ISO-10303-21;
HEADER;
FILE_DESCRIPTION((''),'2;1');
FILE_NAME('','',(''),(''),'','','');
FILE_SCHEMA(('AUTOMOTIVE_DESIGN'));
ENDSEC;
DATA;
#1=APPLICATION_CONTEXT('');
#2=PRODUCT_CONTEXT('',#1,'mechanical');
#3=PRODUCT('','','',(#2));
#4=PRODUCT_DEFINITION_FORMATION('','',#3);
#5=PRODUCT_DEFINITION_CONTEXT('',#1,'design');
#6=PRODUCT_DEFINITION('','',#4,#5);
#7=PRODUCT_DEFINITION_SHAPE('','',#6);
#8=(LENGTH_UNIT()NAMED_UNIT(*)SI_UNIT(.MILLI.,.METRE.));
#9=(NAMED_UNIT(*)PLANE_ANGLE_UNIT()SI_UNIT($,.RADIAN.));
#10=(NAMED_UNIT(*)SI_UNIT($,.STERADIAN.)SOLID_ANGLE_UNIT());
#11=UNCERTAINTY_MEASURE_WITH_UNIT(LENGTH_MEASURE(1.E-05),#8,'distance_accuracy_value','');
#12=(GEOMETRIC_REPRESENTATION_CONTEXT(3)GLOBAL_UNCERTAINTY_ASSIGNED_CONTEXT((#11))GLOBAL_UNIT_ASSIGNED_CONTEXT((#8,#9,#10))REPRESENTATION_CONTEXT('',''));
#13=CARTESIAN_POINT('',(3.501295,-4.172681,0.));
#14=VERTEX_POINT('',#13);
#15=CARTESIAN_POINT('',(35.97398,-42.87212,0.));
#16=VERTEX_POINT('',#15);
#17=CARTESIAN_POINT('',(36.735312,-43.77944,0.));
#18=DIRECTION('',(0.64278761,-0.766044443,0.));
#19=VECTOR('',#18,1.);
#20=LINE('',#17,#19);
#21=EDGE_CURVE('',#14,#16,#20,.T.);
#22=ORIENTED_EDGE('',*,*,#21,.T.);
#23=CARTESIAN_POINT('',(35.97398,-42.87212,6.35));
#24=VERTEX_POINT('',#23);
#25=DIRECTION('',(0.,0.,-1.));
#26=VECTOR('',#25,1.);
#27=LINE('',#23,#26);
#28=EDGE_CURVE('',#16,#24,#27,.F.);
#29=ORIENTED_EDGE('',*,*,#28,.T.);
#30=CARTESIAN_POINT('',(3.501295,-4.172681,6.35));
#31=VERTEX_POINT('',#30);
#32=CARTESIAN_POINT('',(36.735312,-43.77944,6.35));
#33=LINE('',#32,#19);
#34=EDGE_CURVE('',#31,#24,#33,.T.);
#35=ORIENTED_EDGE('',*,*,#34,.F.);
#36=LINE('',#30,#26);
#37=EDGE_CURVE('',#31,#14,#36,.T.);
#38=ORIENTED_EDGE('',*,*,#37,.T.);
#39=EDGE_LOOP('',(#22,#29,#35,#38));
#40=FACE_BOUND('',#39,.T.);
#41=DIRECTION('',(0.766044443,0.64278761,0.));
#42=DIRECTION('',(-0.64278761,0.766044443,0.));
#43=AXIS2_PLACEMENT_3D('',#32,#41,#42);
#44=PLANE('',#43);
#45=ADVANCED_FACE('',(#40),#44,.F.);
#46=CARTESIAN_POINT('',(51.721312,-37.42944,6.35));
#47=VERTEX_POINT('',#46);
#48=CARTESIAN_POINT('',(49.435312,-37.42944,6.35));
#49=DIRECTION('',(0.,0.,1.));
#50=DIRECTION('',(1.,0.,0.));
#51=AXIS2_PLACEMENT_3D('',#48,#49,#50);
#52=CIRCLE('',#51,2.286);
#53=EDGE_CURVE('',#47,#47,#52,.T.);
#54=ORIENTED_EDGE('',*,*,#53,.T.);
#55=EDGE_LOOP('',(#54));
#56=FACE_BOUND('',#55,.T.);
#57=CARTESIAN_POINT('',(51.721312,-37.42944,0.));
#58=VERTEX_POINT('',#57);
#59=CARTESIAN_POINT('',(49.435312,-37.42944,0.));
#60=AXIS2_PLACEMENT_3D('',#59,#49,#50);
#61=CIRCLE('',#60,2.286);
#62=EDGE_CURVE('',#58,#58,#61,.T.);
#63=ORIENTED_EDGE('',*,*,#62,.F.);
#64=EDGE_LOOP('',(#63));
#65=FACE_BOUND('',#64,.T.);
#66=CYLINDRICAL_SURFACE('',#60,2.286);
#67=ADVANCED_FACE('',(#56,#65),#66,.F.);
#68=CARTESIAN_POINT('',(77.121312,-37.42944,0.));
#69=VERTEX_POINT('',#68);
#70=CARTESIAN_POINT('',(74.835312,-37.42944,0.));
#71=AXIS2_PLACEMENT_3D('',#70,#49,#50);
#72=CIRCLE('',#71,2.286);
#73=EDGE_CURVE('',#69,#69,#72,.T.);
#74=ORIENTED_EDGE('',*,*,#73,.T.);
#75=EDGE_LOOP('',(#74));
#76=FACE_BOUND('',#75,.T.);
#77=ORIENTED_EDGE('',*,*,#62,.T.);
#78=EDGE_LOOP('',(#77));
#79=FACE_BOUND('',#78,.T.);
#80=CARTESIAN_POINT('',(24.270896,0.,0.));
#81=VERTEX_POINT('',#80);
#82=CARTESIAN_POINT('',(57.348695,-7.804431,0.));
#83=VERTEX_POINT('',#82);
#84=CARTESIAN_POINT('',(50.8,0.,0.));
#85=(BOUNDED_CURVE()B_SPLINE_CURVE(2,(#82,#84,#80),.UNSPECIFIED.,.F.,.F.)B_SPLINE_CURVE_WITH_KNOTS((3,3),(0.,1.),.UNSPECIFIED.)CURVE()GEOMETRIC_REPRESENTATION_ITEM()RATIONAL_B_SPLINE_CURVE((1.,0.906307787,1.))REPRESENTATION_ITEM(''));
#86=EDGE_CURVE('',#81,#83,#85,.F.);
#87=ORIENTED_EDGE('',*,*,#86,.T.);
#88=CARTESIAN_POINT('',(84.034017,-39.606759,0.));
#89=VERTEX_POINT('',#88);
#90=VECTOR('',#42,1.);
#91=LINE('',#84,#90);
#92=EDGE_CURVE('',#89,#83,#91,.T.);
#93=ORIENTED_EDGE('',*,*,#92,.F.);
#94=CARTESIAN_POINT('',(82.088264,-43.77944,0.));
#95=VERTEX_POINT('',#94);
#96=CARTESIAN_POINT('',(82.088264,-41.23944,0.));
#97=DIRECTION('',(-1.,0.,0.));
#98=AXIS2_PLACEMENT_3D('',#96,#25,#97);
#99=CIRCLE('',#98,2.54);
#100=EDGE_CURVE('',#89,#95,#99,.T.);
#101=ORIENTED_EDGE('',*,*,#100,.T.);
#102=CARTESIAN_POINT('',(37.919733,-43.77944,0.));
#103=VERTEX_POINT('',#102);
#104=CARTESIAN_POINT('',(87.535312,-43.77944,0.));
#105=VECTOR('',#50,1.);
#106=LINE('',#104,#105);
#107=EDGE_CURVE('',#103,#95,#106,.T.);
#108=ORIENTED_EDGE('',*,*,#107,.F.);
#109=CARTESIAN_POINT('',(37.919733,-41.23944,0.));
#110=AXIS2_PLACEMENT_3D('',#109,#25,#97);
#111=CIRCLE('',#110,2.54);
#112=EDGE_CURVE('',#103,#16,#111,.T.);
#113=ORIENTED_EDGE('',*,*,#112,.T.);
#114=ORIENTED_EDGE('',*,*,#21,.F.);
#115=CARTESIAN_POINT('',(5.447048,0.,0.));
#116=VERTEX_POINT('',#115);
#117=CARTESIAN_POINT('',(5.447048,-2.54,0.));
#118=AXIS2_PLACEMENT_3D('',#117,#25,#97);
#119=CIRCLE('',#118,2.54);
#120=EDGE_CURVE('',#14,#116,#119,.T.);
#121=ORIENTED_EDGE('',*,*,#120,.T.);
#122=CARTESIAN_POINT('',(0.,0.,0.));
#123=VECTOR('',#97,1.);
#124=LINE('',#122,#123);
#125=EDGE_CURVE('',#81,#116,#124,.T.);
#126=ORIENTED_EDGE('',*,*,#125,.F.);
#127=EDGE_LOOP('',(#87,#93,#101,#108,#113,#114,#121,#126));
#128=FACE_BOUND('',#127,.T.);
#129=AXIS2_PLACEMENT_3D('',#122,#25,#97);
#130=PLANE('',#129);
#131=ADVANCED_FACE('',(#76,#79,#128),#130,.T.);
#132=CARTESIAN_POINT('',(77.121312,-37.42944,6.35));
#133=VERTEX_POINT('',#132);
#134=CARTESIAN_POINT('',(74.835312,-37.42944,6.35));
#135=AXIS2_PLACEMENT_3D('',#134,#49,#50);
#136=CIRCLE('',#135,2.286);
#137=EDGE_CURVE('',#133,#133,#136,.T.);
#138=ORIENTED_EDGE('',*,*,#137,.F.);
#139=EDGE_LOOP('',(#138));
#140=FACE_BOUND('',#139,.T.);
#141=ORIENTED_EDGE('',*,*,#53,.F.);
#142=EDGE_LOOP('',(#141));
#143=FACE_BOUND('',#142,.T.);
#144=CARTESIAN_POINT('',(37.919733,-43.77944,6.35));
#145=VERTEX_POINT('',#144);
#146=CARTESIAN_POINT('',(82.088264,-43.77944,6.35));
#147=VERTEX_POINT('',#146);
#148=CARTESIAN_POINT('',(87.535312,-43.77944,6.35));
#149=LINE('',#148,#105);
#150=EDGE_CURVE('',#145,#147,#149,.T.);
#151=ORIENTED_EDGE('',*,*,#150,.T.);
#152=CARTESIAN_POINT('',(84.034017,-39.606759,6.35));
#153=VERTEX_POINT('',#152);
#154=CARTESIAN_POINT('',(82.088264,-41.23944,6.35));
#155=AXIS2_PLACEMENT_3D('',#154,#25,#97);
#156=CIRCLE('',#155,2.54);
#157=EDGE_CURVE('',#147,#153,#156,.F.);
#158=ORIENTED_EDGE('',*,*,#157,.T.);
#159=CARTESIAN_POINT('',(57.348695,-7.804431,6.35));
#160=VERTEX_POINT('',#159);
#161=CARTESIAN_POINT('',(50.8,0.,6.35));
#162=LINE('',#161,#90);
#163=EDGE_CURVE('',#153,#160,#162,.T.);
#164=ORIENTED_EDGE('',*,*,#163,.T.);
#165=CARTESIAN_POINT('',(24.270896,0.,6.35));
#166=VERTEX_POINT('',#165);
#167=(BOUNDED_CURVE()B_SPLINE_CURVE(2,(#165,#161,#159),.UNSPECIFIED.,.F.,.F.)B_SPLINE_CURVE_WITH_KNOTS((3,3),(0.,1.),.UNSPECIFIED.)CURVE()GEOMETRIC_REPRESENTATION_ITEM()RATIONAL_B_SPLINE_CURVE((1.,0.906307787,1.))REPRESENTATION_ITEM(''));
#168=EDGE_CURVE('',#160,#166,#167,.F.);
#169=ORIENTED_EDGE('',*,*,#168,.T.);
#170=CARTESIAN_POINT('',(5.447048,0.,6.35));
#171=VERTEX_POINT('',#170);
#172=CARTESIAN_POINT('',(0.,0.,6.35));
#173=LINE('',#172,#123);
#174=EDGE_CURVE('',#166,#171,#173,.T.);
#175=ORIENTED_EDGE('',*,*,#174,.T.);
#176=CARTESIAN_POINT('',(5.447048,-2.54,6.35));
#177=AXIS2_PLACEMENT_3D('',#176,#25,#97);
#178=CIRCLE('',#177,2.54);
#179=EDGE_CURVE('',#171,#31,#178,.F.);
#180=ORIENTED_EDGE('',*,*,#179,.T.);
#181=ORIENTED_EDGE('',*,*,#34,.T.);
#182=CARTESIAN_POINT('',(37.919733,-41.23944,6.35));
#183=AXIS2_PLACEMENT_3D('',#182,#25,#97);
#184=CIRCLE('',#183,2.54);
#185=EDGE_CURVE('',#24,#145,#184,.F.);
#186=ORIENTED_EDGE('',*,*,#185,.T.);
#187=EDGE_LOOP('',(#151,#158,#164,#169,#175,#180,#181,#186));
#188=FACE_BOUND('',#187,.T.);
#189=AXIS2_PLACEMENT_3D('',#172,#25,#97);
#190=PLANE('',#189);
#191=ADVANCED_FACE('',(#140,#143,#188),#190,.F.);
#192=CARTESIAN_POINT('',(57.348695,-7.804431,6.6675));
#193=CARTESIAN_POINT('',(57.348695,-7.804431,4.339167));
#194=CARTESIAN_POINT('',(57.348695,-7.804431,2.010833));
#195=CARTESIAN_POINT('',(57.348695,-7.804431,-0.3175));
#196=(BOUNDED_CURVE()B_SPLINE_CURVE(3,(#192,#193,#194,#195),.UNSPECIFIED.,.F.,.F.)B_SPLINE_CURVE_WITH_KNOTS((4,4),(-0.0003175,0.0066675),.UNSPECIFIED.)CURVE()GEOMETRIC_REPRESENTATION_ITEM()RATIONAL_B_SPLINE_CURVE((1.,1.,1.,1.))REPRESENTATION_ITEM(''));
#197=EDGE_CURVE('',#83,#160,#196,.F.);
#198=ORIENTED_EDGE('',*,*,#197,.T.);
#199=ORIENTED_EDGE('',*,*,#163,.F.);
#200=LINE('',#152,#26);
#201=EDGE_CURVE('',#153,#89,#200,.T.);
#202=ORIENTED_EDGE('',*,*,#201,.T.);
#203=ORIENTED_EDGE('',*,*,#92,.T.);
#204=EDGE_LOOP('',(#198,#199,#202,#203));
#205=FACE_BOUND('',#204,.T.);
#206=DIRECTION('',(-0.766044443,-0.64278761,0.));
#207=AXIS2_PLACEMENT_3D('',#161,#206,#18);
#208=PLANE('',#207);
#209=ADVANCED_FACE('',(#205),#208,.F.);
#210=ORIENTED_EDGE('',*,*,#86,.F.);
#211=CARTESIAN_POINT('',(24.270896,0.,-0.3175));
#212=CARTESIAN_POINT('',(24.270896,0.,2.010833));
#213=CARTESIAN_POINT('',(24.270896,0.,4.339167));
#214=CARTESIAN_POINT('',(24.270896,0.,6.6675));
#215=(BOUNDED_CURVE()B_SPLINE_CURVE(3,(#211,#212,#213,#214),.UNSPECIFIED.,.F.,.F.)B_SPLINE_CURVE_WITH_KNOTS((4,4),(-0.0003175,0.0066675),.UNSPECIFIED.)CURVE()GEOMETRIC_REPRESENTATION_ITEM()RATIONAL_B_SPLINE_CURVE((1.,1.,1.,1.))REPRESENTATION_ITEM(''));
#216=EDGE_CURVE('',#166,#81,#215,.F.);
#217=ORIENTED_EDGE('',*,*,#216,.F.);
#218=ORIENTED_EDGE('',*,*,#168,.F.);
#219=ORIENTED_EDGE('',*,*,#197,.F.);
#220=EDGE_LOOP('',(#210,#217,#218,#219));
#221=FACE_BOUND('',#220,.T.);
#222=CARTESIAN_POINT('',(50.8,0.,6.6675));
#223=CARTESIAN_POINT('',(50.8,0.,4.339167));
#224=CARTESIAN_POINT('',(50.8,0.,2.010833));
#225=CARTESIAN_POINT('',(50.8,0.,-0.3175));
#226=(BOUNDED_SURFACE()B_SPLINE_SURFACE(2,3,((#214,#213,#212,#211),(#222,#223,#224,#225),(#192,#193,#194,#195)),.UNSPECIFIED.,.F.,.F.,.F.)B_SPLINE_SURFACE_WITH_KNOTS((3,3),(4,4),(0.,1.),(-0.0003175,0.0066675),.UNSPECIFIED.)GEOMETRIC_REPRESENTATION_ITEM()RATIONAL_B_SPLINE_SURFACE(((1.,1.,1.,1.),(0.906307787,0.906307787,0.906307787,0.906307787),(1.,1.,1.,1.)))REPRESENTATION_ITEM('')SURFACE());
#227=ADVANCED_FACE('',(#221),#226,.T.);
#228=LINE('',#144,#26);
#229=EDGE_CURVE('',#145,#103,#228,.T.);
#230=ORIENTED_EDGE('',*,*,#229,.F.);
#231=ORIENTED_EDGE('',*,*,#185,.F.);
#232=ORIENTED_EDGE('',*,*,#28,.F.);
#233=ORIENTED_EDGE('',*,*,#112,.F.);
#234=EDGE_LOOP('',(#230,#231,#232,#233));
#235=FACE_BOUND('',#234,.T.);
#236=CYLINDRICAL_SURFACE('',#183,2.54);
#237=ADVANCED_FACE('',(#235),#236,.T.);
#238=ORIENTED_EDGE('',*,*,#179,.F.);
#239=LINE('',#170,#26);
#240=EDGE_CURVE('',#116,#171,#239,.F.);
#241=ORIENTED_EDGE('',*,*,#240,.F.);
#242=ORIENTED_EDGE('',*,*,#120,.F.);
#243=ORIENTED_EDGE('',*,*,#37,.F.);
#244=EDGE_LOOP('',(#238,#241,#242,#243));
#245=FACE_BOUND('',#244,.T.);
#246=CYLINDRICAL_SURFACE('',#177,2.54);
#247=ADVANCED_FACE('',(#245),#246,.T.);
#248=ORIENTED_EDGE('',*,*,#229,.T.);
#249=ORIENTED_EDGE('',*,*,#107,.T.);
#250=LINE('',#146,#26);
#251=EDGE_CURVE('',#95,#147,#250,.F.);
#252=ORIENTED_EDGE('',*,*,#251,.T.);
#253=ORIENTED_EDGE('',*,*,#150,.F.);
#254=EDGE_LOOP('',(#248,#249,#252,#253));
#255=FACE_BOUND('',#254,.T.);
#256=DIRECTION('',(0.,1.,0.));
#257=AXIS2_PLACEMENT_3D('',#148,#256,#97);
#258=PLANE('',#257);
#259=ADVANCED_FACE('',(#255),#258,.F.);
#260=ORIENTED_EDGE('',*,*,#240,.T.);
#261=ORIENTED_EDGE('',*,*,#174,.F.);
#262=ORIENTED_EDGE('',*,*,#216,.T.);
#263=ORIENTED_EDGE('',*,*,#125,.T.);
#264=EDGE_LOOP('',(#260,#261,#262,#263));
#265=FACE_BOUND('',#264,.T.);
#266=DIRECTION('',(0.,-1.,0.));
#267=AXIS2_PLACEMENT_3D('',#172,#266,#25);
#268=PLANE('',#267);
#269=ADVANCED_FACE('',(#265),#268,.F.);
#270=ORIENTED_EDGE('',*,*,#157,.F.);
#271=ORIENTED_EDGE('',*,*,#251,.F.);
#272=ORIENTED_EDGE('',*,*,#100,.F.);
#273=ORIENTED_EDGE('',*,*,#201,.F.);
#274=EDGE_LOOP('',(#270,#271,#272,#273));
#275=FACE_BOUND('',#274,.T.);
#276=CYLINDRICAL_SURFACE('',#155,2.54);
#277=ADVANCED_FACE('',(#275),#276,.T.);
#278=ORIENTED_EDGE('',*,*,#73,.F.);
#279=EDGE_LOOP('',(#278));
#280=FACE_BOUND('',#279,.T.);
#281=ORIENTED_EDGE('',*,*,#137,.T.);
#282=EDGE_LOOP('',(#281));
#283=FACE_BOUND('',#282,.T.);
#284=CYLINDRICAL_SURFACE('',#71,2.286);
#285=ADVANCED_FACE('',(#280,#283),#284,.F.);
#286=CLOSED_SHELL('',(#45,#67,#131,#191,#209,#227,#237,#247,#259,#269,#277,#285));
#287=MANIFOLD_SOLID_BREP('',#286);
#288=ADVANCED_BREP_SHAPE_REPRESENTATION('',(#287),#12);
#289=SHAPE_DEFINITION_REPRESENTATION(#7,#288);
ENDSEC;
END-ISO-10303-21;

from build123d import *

# Parameters (mm, degrees)
BOSS_EXTRUDE1_DEPTH = 6.35
SKETCH2_R           = 2.286
CUT_EXTRUDE1_DEPTH  = 99.078502682
FILLET2_R           = 2.54


with BuildPart() as part:
    # Sketch1 → Boss-Extrude1 (new body)
    with BuildSketch(Plane.XY):
        Polygon((0, 0), (50.8, 0), (87.535311894, -43.779439924), (36.735311894, -43.779439924), align=None)
    extrude(amount=BOSS_EXTRUDE1_DEPTH)

    # Sketch2 → Cut-Extrude1 (cut, through all)
    with BuildSketch(Plane.XY.offset(6.35)):
        with Locations((74.835311894, -37.429439924)):
            Circle(SKETCH2_R)
        with Locations((49.435311894, -37.429439924)):
            Circle(SKETCH2_R)
    extrude(amount=-CUT_EXTRUDE1_DEPTH, mode=Mode.SUBTRACT)

    # Fillet1
    # an asymmetric fillet: 43.18, 35.56 mm, written as the material it takes off along each edge
    with BuildSketch(Plane(origin=(50.8, 0, -66.322759672), x_dir=(-1, 0, 0), z_dir=(0, 0, 1))) as fillet1_piece_1:
        with BuildLine():
            Bezier((26.529103869, 0), (0, 0), (-6.548695185, 7.804431014), weights=[1, 0.906307787, 1])
            Line((-6.548695185, 7.804431014), (0, 0))
            Line((0, 0), (26.529103869, 0))
        make_face()
    extrude(amount=138.995519344, mode=Mode.SUBTRACT)

    # Fillet2
    fillet2_edges = [part.edges().sort_by_distance(p)[0] for p in [
        (87.535311894, -43.779439924, 3.175),
        (0, 0, 3.175),
        (36.735311894, -43.779439924, 3.175),
    ]]
    fillet(fillet2_edges, radius=FILLET2_R)


solid = part.part
